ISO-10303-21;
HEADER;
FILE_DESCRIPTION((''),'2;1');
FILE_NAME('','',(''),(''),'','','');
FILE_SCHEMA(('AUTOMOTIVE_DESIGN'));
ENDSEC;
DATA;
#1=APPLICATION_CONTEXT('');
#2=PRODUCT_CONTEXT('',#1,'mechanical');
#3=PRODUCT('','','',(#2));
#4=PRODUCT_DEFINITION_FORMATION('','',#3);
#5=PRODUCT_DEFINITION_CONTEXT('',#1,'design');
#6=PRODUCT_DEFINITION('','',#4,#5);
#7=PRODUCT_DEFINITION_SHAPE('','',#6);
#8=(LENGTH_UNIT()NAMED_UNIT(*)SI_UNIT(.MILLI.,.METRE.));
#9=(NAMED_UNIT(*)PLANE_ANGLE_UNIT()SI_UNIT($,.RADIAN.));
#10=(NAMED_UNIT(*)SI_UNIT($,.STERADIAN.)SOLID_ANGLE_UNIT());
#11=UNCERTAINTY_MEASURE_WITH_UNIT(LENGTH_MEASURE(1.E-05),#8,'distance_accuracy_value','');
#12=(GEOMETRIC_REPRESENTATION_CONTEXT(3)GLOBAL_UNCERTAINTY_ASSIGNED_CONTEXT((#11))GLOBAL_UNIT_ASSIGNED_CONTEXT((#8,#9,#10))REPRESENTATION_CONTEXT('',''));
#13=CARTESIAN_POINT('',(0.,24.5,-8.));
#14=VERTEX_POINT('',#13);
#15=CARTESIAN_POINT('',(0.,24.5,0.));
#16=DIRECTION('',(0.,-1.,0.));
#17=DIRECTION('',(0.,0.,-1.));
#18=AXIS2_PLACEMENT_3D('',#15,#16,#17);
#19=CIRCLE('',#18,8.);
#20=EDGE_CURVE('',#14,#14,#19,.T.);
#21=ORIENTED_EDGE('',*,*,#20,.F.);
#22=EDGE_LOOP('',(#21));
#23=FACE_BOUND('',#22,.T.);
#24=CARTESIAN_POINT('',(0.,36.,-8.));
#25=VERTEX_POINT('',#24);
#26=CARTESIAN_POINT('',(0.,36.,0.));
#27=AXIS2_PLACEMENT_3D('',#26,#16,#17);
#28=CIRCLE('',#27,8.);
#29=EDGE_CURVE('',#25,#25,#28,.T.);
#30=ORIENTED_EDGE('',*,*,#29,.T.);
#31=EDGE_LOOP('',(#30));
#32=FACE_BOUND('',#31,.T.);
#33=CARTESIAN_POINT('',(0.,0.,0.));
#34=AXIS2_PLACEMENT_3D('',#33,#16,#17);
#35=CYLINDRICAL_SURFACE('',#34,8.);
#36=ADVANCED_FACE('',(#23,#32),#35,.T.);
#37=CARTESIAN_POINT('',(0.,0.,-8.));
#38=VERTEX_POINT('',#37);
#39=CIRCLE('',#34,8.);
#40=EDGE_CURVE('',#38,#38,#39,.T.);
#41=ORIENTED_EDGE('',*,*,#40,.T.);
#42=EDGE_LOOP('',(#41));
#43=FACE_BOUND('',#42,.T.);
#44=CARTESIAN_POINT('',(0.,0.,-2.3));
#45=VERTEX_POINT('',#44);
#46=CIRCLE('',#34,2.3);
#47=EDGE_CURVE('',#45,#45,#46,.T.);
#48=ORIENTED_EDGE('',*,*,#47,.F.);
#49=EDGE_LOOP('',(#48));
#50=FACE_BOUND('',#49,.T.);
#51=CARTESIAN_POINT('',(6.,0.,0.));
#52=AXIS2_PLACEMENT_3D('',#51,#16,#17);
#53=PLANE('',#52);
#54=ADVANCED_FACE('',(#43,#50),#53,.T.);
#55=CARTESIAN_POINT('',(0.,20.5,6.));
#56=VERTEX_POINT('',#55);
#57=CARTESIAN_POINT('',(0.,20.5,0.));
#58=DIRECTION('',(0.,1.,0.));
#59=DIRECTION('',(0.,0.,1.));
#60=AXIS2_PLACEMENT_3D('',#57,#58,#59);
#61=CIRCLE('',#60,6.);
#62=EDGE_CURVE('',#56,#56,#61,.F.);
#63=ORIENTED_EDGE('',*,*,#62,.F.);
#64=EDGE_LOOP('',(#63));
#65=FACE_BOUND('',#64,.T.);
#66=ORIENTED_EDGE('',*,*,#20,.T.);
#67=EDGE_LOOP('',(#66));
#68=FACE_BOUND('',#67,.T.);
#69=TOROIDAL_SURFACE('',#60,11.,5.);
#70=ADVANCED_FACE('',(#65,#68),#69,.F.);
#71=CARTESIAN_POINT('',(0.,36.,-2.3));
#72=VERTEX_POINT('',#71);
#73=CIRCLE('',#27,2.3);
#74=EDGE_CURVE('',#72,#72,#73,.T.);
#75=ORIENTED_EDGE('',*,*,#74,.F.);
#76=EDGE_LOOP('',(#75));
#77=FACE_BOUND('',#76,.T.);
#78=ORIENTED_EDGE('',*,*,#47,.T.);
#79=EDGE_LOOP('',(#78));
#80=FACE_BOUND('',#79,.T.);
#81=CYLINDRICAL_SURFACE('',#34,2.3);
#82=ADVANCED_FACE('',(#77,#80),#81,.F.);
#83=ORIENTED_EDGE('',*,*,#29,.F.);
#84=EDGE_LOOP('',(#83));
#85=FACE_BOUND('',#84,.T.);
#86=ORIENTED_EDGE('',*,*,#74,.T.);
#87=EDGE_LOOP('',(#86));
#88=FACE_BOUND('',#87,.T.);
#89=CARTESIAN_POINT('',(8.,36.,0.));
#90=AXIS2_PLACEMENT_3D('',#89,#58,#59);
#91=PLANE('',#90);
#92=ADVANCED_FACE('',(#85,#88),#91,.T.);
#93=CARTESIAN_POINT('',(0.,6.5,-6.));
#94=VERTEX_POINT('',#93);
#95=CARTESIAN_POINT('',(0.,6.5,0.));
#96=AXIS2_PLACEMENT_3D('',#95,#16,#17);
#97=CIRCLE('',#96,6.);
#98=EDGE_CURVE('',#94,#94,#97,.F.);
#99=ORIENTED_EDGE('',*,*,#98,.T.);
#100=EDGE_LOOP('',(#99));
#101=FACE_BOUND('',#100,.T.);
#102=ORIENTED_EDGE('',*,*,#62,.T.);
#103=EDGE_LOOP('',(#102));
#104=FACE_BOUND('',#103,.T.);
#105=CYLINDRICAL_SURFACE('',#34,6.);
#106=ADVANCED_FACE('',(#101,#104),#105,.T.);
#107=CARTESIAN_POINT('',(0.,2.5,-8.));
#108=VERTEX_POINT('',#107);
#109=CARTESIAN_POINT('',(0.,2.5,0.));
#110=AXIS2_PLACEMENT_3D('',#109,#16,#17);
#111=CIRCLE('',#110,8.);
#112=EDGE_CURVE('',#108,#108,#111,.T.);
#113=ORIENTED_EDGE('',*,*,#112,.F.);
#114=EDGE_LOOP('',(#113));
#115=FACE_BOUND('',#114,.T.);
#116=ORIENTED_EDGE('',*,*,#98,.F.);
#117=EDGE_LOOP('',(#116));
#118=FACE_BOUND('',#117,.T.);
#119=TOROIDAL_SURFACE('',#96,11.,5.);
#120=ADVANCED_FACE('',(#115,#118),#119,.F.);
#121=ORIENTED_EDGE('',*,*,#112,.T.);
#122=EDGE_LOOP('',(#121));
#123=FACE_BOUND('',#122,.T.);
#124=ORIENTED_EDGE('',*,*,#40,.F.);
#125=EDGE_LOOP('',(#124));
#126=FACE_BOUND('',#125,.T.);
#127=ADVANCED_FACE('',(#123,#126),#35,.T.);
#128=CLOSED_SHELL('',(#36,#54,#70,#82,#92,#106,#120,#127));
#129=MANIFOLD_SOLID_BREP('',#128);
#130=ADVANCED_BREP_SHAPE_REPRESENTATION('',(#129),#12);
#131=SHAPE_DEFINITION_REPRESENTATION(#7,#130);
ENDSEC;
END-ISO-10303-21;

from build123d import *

# Parameters (mm, degrees)
FILLET_1_R = 5


with BuildPart() as part:
    # Эскиз1 → Повернуть1 (revolve)
    with BuildSketch(Plane.XY, mode=Mode.PRIVATE) as revolve_1_sk:
        Polygon((2.3, 0), (2.3, 36), (7.5, 36), (8, 36), (8, 24.5), (6, 24.5), (6, 2.5), (8, 2.5), (8, 0), (6, 0), align=None)
    revolve(revolve_1_sk.sketch.rotate(Axis((0, 0, 0), (0, 1, 0)), 90), axis=Axis((0, 0, 0), (0, 1, 0)))

    # Скругление1
    # the kernel refuses this fillet: 5 mm, written as the material it adds along each edge
    with BuildSketch(Plane(origin=(0, 2.5, 0), x_dir=(0, 0, -1), z_dir=(1, 0, 0))) as fillet_1_piece_1:
        with BuildLine():
            CenterArc((11, 4), FILLET_1_R, 180, 53.130102354)
            Line((8, 0), (7.94, -0.08))
            ThreePointArc((7.94, -0.08), (7, -0.1), (6, -0.1))
            Line((6, -0.1), (5.9, 0))
            Line((5.9, 0), (5.9, 4))
            Line((5.9, 4), (6, 4))
        make_face()
    revolve(axis=Axis((0, 2.5, 0), (0, 1, 0)))
    with BuildSketch(Plane(origin=(0, 24.5, 0), x_dir=(0, 0, -1), z_dir=(1, 0, 0))) as fillet_1_piece_2:
        with BuildLine():
            CenterArc((11, -4), FILLET_1_R, 126.869897646, 53.130102354)
            Line((6, -4), (5.9, -4))
            Line((5.9, -4), (5.9, 0))
            Line((5.9, 0), (6, 0.1))
            ThreePointArc((6, 0.1), (7, 0.1), (7.94, 0.08))
            Line((7.94, 0.08), (8, 0))
        make_face()
    revolve(axis=Axis((0, 24.5, 0), (0, 1, 0)))


solid = part.part
